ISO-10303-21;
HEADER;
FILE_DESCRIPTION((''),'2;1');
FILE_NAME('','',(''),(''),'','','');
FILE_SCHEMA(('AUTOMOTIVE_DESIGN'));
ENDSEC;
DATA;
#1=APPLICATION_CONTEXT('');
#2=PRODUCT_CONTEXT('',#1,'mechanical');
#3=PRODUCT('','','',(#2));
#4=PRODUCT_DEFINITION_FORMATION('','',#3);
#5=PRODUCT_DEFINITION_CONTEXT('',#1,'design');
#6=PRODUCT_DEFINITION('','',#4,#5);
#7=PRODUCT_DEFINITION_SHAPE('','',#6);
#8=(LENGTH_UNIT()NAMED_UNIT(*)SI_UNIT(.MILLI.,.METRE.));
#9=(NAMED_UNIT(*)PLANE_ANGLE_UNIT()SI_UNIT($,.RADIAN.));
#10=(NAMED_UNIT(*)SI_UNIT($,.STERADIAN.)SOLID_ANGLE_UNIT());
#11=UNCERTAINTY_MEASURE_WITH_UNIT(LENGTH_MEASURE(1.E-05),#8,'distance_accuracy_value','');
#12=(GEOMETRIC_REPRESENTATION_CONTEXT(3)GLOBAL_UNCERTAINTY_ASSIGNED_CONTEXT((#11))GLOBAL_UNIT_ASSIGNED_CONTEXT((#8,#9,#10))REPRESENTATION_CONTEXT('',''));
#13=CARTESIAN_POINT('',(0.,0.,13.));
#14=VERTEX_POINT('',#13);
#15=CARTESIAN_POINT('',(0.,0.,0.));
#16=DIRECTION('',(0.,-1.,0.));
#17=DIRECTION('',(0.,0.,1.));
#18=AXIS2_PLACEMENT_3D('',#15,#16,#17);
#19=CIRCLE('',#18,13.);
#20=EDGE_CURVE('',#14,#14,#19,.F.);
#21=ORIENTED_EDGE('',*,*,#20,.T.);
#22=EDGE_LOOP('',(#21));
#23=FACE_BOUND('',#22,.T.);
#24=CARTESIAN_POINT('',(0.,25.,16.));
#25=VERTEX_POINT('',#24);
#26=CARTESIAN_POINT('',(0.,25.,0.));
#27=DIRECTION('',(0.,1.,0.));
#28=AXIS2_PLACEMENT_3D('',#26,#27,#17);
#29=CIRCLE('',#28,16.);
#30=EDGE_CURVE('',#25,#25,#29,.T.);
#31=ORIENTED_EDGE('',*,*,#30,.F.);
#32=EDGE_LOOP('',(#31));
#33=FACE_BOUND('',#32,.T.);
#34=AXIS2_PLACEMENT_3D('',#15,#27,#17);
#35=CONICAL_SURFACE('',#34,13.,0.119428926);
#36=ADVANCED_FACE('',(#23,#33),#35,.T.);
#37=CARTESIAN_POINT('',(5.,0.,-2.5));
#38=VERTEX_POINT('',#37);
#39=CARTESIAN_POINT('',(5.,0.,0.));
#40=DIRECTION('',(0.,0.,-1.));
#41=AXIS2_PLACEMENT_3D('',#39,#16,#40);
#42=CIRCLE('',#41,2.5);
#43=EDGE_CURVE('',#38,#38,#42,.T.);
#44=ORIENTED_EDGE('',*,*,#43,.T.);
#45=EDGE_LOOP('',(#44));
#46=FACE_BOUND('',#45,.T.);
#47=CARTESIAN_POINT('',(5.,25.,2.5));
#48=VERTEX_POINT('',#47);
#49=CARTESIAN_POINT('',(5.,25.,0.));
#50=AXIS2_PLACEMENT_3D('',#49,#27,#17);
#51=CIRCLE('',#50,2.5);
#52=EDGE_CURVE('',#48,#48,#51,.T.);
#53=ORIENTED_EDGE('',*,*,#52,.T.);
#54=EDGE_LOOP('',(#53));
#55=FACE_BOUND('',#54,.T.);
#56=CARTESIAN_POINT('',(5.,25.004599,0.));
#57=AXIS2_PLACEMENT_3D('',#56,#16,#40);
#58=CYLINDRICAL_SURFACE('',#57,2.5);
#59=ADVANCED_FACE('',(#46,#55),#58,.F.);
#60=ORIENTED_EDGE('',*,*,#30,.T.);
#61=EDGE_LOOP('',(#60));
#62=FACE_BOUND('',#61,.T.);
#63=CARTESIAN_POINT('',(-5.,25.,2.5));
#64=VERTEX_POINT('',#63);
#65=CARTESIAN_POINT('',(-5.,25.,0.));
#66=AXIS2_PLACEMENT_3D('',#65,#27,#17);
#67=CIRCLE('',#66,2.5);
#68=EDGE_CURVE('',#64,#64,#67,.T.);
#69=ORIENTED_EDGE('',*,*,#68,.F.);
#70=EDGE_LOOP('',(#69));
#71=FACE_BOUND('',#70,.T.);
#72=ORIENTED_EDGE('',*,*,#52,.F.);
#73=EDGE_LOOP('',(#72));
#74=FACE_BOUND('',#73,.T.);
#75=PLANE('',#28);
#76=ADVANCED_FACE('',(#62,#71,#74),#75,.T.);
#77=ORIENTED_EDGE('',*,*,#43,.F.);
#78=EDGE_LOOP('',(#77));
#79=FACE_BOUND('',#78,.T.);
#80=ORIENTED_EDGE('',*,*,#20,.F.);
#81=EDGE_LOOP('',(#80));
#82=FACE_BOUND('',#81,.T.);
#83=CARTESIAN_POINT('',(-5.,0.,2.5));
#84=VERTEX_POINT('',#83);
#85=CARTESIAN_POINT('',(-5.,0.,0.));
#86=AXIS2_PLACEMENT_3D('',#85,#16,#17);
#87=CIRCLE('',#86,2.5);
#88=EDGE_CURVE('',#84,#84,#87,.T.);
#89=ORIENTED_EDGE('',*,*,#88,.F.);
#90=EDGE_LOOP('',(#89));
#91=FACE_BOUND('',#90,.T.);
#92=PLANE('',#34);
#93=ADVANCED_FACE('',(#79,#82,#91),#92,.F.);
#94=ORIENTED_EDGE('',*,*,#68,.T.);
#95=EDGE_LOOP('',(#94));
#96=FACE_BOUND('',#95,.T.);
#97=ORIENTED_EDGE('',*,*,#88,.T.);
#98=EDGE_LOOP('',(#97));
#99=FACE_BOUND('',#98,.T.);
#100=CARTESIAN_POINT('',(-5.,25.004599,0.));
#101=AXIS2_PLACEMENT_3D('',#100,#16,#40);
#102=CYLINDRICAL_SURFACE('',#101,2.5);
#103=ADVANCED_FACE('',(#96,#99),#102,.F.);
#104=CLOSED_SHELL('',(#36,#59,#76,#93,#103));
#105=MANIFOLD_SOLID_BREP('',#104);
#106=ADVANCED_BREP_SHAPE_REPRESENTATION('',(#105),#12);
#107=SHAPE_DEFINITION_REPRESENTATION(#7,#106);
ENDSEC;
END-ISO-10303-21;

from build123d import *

# Parameters (mm, degrees)
SKETCH13_R         = 2.5
CUT_EXTRUDE1_DEPTH = 34.7194306


# Read off the part's stored shape, not the designer's step: Boundary2
with BuildPart() as part:
    # Boundary2 outline → Boundary2 (revolve)
    with BuildSketch(Plane.XY):
        Polygon((0, 0), (13, 0), (16, 25), (0, 25), align=None)
    revolve(axis=Axis((0, 0, 0), (0, 1, 0)))

    # Sketch13 → Cut-Extrude1 (cut, through all)
    with BuildSketch(Plane.XZ):
        with Locations(Location((5, 0, 0), (0, 0, 270))):
            Circle(SKETCH13_R)
        with Locations(Location((-5, 0, 0), (0, 0, 90))):
            Circle(SKETCH13_R)
    extrude(amount=-CUT_EXTRUDE1_DEPTH, mode=Mode.SUBTRACT)


solid = part.part
